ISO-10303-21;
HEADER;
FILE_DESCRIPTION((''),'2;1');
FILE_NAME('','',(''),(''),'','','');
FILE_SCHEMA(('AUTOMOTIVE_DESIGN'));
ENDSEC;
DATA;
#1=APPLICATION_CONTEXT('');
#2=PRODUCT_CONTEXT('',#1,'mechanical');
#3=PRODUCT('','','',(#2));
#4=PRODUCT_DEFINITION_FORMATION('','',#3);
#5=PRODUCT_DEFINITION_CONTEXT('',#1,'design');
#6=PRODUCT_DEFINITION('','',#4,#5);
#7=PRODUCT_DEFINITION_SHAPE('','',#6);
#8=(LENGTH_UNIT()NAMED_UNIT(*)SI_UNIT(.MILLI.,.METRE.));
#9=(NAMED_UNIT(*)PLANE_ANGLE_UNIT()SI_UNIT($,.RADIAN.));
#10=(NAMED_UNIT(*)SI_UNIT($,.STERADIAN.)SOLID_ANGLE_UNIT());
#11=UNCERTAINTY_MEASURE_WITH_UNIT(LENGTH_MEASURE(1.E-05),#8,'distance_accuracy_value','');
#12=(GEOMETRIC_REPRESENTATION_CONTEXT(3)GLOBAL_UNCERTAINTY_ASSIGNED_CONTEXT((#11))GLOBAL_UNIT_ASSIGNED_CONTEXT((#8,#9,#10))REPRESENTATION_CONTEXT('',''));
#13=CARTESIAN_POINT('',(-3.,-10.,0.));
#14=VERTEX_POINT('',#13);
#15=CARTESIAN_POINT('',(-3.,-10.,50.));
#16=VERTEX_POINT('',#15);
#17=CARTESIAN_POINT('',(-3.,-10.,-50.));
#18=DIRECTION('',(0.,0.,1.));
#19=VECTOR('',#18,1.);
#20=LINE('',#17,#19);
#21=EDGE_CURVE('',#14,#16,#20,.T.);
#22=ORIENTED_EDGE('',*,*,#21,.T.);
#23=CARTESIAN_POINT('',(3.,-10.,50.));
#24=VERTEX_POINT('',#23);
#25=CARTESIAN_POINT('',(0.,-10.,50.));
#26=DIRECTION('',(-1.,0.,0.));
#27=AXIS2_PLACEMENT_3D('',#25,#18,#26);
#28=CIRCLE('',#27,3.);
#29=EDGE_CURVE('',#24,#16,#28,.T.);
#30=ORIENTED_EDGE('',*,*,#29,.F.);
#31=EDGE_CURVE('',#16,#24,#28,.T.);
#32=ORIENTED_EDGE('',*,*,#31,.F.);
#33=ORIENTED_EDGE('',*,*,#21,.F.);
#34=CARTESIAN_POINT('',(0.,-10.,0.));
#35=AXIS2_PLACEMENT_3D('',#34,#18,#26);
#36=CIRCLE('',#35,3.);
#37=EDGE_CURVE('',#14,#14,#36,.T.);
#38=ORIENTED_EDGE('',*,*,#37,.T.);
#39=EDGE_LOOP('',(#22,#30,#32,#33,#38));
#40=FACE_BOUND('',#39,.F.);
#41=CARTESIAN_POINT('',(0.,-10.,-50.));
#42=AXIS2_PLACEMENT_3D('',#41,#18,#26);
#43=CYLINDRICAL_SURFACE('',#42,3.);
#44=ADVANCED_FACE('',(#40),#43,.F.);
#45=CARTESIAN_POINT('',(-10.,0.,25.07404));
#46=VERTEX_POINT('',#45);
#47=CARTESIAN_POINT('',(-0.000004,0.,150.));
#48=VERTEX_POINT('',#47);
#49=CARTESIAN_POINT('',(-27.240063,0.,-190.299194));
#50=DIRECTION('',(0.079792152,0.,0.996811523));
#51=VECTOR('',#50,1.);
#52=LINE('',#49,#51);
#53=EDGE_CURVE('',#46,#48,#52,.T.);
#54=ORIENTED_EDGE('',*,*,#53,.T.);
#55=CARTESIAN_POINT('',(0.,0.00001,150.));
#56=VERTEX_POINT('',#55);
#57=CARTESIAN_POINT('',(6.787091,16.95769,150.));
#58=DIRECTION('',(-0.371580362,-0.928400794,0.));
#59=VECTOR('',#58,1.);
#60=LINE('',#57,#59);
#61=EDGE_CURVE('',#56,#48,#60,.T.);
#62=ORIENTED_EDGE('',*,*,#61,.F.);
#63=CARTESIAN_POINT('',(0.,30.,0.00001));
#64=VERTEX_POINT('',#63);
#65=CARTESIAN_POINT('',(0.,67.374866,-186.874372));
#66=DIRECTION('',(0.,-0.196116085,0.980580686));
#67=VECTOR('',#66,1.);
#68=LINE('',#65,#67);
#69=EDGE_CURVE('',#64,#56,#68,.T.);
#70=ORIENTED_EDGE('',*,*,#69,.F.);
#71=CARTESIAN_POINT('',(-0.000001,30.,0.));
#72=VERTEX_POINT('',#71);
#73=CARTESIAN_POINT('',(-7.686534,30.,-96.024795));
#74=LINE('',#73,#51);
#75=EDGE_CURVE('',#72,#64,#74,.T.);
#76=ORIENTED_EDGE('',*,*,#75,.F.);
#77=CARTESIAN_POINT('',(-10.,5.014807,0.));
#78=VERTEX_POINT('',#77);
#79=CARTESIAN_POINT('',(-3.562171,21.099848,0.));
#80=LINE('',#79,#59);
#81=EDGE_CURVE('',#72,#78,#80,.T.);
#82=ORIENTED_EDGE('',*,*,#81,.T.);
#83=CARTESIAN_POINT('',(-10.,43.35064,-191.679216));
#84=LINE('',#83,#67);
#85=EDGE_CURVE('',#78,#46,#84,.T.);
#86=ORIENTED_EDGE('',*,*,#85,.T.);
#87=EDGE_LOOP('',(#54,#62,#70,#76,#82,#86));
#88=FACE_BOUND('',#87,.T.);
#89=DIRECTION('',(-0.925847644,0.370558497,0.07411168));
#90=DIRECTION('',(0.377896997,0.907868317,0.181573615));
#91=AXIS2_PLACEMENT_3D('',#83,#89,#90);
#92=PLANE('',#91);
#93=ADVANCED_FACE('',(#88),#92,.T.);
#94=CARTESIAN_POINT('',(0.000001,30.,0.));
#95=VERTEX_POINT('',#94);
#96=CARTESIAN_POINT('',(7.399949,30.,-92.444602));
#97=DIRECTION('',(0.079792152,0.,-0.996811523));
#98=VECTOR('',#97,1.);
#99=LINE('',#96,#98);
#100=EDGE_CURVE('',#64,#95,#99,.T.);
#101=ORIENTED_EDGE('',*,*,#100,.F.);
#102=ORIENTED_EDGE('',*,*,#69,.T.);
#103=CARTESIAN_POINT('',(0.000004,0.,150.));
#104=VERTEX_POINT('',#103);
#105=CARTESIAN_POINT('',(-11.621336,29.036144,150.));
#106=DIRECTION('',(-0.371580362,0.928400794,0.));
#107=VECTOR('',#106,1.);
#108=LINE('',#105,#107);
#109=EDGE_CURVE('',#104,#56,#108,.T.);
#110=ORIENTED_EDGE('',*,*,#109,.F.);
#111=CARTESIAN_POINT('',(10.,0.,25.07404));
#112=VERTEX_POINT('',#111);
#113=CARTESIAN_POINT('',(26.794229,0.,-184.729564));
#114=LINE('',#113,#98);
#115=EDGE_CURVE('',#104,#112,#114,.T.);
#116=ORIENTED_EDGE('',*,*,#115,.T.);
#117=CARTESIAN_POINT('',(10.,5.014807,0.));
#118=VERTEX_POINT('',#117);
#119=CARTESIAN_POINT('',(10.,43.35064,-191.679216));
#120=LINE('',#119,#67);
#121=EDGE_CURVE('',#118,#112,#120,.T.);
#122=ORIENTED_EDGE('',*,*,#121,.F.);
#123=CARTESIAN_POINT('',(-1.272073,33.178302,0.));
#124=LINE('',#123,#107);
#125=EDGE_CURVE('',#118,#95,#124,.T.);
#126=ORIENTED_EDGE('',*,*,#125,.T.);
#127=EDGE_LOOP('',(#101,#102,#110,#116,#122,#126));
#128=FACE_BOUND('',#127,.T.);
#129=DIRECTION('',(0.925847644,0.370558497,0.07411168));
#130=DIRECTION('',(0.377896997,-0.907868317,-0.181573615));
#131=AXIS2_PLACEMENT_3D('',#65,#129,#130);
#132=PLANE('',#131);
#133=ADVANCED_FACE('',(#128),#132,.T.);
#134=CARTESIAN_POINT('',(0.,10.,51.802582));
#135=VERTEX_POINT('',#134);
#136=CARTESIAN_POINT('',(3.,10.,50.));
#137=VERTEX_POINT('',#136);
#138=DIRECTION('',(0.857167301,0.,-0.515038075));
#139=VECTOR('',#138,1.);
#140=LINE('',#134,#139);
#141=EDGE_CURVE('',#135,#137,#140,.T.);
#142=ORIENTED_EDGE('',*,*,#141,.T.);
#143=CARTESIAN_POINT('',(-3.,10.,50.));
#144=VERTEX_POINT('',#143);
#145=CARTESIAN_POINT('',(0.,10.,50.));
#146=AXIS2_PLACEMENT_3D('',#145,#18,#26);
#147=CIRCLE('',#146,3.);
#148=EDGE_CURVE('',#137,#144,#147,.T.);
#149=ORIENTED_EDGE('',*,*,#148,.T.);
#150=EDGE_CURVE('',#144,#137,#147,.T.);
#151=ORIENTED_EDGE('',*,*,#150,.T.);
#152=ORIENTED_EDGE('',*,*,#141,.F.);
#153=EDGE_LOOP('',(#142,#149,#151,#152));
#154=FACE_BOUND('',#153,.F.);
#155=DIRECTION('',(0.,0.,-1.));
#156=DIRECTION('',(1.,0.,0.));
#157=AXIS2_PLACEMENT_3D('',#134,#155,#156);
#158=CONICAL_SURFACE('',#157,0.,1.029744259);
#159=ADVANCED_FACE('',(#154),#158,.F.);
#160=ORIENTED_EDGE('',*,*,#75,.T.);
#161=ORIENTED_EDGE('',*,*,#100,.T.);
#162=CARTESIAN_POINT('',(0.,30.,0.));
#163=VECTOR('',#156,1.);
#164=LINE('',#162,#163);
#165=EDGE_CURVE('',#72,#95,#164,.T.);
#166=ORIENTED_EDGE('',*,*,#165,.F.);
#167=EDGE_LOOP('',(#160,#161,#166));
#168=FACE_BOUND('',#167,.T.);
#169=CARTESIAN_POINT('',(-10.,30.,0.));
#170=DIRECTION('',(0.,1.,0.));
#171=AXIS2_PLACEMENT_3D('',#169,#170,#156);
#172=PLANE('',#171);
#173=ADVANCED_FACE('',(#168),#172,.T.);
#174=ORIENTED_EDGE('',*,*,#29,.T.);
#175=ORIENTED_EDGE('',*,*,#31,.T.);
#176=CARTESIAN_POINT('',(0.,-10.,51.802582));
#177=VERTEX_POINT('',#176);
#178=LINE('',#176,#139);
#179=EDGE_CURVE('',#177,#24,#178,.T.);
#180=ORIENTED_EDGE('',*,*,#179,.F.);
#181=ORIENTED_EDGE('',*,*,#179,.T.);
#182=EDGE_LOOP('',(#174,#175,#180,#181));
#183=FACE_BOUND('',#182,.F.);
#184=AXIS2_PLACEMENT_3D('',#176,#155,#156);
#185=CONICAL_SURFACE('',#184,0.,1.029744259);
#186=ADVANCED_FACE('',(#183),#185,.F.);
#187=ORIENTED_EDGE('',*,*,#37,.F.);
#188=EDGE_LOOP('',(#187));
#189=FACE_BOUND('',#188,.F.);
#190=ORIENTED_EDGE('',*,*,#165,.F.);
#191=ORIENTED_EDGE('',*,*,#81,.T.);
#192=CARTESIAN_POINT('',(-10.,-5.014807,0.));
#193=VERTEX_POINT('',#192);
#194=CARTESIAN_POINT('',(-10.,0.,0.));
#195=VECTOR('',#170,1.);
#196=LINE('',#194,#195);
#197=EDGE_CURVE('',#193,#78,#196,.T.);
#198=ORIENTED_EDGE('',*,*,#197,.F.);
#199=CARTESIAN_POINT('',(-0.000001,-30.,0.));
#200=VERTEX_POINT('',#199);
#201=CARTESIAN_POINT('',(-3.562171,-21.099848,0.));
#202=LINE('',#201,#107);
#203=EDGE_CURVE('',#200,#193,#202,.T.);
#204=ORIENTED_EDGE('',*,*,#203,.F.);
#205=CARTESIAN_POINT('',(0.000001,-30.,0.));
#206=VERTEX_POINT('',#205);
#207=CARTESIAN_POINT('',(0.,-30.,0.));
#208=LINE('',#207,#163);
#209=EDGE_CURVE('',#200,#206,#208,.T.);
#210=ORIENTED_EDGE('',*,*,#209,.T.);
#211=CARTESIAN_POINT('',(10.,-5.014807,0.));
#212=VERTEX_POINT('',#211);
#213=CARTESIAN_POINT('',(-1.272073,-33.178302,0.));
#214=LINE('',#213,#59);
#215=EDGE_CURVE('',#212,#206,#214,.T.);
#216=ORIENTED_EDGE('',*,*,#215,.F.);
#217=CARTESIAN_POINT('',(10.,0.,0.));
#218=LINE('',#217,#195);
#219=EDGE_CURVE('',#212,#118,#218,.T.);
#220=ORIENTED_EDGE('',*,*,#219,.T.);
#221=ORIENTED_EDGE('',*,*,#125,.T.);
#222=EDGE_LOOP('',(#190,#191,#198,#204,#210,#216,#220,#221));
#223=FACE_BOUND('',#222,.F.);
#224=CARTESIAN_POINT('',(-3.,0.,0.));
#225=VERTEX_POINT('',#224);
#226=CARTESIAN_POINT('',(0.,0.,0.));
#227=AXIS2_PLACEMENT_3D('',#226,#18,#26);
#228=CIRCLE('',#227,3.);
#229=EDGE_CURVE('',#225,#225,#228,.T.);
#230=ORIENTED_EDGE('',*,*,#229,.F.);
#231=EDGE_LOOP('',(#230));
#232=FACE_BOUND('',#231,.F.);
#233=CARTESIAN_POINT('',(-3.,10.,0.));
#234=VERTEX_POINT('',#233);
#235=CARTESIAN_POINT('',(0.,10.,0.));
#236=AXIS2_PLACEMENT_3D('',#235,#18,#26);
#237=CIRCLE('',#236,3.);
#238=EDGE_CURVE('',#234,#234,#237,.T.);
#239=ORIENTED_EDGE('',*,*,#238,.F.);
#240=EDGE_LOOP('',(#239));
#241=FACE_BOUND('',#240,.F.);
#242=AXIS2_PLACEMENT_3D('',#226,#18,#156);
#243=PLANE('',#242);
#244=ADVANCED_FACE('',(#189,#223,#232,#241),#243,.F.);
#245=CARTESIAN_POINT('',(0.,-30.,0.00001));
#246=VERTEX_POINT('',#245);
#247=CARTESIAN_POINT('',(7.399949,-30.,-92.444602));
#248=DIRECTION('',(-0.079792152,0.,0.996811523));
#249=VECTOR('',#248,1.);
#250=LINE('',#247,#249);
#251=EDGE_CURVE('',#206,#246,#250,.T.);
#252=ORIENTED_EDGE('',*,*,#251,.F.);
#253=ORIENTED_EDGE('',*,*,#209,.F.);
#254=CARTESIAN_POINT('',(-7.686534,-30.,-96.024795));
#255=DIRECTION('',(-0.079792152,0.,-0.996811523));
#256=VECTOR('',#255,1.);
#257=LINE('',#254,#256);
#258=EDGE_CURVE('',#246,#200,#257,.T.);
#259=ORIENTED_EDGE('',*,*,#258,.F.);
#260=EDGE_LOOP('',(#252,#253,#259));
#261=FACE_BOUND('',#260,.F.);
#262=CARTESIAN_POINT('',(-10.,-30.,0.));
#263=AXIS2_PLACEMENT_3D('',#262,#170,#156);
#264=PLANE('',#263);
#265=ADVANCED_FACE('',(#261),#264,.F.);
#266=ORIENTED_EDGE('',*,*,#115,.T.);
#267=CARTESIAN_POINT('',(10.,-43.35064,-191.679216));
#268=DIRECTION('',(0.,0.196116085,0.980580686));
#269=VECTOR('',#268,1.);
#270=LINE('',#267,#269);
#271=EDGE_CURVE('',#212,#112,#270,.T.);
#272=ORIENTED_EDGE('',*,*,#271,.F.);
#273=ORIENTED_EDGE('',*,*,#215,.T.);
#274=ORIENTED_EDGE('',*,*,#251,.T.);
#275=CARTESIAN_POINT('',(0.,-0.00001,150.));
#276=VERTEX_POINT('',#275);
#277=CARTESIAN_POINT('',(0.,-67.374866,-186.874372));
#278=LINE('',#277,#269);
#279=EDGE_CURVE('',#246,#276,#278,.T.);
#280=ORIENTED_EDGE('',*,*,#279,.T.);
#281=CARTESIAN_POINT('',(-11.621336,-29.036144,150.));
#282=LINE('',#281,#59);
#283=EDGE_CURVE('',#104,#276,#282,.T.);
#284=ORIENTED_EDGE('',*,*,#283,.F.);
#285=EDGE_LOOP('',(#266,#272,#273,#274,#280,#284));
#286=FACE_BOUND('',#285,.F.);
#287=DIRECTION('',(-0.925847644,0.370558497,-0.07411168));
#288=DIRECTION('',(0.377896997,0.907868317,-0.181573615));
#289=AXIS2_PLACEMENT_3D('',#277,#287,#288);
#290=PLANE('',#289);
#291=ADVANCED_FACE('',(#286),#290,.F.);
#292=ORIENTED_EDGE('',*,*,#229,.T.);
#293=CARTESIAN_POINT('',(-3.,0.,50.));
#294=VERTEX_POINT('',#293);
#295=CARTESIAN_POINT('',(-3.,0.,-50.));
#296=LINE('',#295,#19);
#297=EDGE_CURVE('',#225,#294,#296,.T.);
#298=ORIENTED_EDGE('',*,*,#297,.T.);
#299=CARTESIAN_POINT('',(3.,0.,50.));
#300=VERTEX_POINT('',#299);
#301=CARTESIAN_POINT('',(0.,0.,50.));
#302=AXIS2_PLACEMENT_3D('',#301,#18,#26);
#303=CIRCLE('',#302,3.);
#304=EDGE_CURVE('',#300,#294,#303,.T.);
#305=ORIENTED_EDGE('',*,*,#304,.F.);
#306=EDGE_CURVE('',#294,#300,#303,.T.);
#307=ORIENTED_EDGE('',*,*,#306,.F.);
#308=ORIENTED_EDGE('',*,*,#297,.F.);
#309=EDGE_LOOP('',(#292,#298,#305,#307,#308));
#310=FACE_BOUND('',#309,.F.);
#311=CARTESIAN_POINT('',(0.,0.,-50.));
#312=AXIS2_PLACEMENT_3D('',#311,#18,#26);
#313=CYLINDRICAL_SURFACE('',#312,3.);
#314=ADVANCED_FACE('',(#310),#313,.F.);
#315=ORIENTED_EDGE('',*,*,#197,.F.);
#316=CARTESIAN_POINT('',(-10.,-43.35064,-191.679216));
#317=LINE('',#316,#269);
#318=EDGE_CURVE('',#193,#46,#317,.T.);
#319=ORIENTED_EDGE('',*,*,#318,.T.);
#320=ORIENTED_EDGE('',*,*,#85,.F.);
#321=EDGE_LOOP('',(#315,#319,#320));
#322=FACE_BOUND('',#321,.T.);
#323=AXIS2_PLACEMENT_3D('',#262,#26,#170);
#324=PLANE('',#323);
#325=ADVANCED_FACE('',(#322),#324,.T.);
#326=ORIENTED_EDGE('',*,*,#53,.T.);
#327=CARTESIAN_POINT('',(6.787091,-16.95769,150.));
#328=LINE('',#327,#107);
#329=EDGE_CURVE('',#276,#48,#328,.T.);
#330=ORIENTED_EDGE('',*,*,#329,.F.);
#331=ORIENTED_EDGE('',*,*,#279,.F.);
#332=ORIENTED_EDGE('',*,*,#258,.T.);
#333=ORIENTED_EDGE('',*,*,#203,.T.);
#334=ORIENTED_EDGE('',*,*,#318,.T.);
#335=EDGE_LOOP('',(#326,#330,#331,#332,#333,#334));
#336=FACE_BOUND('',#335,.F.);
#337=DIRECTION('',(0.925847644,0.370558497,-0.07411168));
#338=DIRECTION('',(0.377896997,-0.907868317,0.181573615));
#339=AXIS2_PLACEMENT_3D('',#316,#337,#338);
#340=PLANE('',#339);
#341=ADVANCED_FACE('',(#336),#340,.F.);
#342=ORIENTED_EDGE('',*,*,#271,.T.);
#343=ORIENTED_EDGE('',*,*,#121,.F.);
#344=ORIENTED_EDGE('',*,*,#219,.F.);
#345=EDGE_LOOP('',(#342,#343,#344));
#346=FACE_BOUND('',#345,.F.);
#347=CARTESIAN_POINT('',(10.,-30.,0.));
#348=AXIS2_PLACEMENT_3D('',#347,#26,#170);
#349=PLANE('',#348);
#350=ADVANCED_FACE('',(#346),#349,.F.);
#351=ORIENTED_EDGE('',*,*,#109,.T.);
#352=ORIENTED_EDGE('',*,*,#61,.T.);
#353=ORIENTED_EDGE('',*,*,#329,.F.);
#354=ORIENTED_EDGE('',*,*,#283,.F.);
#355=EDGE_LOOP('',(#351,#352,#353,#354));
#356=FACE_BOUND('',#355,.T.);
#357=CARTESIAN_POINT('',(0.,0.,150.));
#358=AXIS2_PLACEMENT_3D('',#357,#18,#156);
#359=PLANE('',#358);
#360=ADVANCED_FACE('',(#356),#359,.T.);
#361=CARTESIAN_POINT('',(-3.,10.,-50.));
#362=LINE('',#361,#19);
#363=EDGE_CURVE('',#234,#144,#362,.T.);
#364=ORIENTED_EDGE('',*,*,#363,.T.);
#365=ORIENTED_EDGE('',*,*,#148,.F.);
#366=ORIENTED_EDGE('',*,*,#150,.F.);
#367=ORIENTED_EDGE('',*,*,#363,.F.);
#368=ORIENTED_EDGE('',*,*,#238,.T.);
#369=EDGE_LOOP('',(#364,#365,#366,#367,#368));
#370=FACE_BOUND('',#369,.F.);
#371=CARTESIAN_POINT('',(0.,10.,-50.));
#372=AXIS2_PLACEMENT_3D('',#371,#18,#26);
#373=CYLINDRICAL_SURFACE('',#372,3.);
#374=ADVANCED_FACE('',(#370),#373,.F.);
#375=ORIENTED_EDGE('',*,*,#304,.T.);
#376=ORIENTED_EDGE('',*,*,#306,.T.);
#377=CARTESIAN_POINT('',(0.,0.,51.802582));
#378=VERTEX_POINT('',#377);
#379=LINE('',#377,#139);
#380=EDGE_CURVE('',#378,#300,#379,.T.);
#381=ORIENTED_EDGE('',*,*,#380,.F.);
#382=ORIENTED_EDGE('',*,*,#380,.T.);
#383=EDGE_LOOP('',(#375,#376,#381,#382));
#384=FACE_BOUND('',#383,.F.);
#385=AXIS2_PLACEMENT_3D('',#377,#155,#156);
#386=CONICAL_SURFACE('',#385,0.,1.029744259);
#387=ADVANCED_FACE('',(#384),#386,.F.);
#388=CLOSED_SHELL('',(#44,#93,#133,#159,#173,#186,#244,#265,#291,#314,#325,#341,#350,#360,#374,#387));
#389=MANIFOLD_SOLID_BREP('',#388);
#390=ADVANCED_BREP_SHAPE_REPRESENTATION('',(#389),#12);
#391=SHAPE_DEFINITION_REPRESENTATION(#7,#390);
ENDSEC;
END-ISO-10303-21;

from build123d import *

# Parameters (mm, degrees)
F0_W        = 20
F0_H        = 60
F1_DEPTH    = 150
F2_D        = 6
F2_DEPTH    = 50
F2_TIP      = 1.8025818571
F3_SIZE2    = 29.99999
F3_SIZE     = 149.99999
F3_2_SIZE2  = 29.99999
F3_2_SIZE   = 149.99999
F4_T1_DEPTH = 407.0708695577
F4_T3_DEPTH = 407.0708695577


# Not quite as in the source:
# - a fillet or chamfer that OpenCascade refuses, or shapes differently, is made with other operations: its cross-section is extruded or revolved along the edge and cut away or added
# - a fillet or chamfer is up to 0.001 mm smaller than in the source, because OpenCascade refuses the exact size


with BuildPart() as f1:
    # F0 (on Top) → F1 (new body)
    with BuildSketch(Plane.XY):
        Rectangle(F0_W, F0_H)
    extrude(amount=F1_DEPTH)

    # F2
    with Locations(Plane(origin=(0, 0, 0), x_dir=(1, 0, 0), z_dir=(0, 0, -1))):
        with Locations((0, -10), (0, 0), (0, 10)):
            Hole(F2_D / 2, depth=F2_DEPTH)
            with Locations((0, 0, -(F2_DEPTH + F2_TIP / 2))):  # 118° drill point
                Cone(0, F2_D / 2, F2_TIP, mode=Mode.SUBTRACT)

    # F3 (size 150 and 30 in the source; OpenCascade refuses exactly that, so slightly less here)
    f3_edges = [f1.edges().sort_by_distance(p)[0] for p in [
        (0, -30, 150),
    ]]
    f3_side = f1.faces().sort_by_distance((0, -30, 75))[0]
    chamfer(f3_edges, length=F3_SIZE, length2=F3_SIZE2, reference=f3_side)

    # F3#2 (size 150 and 30 in the source; OpenCascade refuses exactly that, so slightly less here)
    f3_2_edges = [f1.edges().sort_by_distance(p)[0] for p in [
        (0, 30, 150),
    ]]
    f3_2_side = f1.faces().sort_by_distance((0, 30, 75))[0]
    chamfer(f3_2_edges, length=F3_2_SIZE, length2=F3_2_SIZE2, reference=f3_2_side)

    # F4: chamfer of 24.5 x 10 on 4 edges, made by hand

    # F4_s2 → F4_t1 (cut)
    with BuildSketch(Plane(origin=(0, -38.5287100353, -192.6436015479), x_dir=(1, 0, 0), z_dir=(0, 0.1961160849, 0.9805806857))):
        Polygon((0, -29.4174225336), (10, -4.9174225336), (10, -29.4174225336), align=None)
        Polygon((-10, -4.9174225336), (0, -29.4174225336), (-10, -29.4174225336), align=None)
    extrude(amount=F4_T1_DEPTH, mode=Mode.SUBTRACT)

    # F4_s4 → F4_t3 (cut)
    with BuildSketch(Plane(origin=(0, 38.5287100353, -192.6436015479), x_dir=(1, 0, 0), z_dir=(0, -0.1961160849, 0.9805806857))):
        Polygon((0, 29.4174225336), (10, 4.9174225336), (10, 29.4174225336), align=None)
        Polygon((-10, 4.9174225336), (0, 29.4174225336), (-10, 29.4174225336), align=None)
    extrude(amount=F4_T3_DEPTH, mode=Mode.SUBTRACT)


solid = f1.part
